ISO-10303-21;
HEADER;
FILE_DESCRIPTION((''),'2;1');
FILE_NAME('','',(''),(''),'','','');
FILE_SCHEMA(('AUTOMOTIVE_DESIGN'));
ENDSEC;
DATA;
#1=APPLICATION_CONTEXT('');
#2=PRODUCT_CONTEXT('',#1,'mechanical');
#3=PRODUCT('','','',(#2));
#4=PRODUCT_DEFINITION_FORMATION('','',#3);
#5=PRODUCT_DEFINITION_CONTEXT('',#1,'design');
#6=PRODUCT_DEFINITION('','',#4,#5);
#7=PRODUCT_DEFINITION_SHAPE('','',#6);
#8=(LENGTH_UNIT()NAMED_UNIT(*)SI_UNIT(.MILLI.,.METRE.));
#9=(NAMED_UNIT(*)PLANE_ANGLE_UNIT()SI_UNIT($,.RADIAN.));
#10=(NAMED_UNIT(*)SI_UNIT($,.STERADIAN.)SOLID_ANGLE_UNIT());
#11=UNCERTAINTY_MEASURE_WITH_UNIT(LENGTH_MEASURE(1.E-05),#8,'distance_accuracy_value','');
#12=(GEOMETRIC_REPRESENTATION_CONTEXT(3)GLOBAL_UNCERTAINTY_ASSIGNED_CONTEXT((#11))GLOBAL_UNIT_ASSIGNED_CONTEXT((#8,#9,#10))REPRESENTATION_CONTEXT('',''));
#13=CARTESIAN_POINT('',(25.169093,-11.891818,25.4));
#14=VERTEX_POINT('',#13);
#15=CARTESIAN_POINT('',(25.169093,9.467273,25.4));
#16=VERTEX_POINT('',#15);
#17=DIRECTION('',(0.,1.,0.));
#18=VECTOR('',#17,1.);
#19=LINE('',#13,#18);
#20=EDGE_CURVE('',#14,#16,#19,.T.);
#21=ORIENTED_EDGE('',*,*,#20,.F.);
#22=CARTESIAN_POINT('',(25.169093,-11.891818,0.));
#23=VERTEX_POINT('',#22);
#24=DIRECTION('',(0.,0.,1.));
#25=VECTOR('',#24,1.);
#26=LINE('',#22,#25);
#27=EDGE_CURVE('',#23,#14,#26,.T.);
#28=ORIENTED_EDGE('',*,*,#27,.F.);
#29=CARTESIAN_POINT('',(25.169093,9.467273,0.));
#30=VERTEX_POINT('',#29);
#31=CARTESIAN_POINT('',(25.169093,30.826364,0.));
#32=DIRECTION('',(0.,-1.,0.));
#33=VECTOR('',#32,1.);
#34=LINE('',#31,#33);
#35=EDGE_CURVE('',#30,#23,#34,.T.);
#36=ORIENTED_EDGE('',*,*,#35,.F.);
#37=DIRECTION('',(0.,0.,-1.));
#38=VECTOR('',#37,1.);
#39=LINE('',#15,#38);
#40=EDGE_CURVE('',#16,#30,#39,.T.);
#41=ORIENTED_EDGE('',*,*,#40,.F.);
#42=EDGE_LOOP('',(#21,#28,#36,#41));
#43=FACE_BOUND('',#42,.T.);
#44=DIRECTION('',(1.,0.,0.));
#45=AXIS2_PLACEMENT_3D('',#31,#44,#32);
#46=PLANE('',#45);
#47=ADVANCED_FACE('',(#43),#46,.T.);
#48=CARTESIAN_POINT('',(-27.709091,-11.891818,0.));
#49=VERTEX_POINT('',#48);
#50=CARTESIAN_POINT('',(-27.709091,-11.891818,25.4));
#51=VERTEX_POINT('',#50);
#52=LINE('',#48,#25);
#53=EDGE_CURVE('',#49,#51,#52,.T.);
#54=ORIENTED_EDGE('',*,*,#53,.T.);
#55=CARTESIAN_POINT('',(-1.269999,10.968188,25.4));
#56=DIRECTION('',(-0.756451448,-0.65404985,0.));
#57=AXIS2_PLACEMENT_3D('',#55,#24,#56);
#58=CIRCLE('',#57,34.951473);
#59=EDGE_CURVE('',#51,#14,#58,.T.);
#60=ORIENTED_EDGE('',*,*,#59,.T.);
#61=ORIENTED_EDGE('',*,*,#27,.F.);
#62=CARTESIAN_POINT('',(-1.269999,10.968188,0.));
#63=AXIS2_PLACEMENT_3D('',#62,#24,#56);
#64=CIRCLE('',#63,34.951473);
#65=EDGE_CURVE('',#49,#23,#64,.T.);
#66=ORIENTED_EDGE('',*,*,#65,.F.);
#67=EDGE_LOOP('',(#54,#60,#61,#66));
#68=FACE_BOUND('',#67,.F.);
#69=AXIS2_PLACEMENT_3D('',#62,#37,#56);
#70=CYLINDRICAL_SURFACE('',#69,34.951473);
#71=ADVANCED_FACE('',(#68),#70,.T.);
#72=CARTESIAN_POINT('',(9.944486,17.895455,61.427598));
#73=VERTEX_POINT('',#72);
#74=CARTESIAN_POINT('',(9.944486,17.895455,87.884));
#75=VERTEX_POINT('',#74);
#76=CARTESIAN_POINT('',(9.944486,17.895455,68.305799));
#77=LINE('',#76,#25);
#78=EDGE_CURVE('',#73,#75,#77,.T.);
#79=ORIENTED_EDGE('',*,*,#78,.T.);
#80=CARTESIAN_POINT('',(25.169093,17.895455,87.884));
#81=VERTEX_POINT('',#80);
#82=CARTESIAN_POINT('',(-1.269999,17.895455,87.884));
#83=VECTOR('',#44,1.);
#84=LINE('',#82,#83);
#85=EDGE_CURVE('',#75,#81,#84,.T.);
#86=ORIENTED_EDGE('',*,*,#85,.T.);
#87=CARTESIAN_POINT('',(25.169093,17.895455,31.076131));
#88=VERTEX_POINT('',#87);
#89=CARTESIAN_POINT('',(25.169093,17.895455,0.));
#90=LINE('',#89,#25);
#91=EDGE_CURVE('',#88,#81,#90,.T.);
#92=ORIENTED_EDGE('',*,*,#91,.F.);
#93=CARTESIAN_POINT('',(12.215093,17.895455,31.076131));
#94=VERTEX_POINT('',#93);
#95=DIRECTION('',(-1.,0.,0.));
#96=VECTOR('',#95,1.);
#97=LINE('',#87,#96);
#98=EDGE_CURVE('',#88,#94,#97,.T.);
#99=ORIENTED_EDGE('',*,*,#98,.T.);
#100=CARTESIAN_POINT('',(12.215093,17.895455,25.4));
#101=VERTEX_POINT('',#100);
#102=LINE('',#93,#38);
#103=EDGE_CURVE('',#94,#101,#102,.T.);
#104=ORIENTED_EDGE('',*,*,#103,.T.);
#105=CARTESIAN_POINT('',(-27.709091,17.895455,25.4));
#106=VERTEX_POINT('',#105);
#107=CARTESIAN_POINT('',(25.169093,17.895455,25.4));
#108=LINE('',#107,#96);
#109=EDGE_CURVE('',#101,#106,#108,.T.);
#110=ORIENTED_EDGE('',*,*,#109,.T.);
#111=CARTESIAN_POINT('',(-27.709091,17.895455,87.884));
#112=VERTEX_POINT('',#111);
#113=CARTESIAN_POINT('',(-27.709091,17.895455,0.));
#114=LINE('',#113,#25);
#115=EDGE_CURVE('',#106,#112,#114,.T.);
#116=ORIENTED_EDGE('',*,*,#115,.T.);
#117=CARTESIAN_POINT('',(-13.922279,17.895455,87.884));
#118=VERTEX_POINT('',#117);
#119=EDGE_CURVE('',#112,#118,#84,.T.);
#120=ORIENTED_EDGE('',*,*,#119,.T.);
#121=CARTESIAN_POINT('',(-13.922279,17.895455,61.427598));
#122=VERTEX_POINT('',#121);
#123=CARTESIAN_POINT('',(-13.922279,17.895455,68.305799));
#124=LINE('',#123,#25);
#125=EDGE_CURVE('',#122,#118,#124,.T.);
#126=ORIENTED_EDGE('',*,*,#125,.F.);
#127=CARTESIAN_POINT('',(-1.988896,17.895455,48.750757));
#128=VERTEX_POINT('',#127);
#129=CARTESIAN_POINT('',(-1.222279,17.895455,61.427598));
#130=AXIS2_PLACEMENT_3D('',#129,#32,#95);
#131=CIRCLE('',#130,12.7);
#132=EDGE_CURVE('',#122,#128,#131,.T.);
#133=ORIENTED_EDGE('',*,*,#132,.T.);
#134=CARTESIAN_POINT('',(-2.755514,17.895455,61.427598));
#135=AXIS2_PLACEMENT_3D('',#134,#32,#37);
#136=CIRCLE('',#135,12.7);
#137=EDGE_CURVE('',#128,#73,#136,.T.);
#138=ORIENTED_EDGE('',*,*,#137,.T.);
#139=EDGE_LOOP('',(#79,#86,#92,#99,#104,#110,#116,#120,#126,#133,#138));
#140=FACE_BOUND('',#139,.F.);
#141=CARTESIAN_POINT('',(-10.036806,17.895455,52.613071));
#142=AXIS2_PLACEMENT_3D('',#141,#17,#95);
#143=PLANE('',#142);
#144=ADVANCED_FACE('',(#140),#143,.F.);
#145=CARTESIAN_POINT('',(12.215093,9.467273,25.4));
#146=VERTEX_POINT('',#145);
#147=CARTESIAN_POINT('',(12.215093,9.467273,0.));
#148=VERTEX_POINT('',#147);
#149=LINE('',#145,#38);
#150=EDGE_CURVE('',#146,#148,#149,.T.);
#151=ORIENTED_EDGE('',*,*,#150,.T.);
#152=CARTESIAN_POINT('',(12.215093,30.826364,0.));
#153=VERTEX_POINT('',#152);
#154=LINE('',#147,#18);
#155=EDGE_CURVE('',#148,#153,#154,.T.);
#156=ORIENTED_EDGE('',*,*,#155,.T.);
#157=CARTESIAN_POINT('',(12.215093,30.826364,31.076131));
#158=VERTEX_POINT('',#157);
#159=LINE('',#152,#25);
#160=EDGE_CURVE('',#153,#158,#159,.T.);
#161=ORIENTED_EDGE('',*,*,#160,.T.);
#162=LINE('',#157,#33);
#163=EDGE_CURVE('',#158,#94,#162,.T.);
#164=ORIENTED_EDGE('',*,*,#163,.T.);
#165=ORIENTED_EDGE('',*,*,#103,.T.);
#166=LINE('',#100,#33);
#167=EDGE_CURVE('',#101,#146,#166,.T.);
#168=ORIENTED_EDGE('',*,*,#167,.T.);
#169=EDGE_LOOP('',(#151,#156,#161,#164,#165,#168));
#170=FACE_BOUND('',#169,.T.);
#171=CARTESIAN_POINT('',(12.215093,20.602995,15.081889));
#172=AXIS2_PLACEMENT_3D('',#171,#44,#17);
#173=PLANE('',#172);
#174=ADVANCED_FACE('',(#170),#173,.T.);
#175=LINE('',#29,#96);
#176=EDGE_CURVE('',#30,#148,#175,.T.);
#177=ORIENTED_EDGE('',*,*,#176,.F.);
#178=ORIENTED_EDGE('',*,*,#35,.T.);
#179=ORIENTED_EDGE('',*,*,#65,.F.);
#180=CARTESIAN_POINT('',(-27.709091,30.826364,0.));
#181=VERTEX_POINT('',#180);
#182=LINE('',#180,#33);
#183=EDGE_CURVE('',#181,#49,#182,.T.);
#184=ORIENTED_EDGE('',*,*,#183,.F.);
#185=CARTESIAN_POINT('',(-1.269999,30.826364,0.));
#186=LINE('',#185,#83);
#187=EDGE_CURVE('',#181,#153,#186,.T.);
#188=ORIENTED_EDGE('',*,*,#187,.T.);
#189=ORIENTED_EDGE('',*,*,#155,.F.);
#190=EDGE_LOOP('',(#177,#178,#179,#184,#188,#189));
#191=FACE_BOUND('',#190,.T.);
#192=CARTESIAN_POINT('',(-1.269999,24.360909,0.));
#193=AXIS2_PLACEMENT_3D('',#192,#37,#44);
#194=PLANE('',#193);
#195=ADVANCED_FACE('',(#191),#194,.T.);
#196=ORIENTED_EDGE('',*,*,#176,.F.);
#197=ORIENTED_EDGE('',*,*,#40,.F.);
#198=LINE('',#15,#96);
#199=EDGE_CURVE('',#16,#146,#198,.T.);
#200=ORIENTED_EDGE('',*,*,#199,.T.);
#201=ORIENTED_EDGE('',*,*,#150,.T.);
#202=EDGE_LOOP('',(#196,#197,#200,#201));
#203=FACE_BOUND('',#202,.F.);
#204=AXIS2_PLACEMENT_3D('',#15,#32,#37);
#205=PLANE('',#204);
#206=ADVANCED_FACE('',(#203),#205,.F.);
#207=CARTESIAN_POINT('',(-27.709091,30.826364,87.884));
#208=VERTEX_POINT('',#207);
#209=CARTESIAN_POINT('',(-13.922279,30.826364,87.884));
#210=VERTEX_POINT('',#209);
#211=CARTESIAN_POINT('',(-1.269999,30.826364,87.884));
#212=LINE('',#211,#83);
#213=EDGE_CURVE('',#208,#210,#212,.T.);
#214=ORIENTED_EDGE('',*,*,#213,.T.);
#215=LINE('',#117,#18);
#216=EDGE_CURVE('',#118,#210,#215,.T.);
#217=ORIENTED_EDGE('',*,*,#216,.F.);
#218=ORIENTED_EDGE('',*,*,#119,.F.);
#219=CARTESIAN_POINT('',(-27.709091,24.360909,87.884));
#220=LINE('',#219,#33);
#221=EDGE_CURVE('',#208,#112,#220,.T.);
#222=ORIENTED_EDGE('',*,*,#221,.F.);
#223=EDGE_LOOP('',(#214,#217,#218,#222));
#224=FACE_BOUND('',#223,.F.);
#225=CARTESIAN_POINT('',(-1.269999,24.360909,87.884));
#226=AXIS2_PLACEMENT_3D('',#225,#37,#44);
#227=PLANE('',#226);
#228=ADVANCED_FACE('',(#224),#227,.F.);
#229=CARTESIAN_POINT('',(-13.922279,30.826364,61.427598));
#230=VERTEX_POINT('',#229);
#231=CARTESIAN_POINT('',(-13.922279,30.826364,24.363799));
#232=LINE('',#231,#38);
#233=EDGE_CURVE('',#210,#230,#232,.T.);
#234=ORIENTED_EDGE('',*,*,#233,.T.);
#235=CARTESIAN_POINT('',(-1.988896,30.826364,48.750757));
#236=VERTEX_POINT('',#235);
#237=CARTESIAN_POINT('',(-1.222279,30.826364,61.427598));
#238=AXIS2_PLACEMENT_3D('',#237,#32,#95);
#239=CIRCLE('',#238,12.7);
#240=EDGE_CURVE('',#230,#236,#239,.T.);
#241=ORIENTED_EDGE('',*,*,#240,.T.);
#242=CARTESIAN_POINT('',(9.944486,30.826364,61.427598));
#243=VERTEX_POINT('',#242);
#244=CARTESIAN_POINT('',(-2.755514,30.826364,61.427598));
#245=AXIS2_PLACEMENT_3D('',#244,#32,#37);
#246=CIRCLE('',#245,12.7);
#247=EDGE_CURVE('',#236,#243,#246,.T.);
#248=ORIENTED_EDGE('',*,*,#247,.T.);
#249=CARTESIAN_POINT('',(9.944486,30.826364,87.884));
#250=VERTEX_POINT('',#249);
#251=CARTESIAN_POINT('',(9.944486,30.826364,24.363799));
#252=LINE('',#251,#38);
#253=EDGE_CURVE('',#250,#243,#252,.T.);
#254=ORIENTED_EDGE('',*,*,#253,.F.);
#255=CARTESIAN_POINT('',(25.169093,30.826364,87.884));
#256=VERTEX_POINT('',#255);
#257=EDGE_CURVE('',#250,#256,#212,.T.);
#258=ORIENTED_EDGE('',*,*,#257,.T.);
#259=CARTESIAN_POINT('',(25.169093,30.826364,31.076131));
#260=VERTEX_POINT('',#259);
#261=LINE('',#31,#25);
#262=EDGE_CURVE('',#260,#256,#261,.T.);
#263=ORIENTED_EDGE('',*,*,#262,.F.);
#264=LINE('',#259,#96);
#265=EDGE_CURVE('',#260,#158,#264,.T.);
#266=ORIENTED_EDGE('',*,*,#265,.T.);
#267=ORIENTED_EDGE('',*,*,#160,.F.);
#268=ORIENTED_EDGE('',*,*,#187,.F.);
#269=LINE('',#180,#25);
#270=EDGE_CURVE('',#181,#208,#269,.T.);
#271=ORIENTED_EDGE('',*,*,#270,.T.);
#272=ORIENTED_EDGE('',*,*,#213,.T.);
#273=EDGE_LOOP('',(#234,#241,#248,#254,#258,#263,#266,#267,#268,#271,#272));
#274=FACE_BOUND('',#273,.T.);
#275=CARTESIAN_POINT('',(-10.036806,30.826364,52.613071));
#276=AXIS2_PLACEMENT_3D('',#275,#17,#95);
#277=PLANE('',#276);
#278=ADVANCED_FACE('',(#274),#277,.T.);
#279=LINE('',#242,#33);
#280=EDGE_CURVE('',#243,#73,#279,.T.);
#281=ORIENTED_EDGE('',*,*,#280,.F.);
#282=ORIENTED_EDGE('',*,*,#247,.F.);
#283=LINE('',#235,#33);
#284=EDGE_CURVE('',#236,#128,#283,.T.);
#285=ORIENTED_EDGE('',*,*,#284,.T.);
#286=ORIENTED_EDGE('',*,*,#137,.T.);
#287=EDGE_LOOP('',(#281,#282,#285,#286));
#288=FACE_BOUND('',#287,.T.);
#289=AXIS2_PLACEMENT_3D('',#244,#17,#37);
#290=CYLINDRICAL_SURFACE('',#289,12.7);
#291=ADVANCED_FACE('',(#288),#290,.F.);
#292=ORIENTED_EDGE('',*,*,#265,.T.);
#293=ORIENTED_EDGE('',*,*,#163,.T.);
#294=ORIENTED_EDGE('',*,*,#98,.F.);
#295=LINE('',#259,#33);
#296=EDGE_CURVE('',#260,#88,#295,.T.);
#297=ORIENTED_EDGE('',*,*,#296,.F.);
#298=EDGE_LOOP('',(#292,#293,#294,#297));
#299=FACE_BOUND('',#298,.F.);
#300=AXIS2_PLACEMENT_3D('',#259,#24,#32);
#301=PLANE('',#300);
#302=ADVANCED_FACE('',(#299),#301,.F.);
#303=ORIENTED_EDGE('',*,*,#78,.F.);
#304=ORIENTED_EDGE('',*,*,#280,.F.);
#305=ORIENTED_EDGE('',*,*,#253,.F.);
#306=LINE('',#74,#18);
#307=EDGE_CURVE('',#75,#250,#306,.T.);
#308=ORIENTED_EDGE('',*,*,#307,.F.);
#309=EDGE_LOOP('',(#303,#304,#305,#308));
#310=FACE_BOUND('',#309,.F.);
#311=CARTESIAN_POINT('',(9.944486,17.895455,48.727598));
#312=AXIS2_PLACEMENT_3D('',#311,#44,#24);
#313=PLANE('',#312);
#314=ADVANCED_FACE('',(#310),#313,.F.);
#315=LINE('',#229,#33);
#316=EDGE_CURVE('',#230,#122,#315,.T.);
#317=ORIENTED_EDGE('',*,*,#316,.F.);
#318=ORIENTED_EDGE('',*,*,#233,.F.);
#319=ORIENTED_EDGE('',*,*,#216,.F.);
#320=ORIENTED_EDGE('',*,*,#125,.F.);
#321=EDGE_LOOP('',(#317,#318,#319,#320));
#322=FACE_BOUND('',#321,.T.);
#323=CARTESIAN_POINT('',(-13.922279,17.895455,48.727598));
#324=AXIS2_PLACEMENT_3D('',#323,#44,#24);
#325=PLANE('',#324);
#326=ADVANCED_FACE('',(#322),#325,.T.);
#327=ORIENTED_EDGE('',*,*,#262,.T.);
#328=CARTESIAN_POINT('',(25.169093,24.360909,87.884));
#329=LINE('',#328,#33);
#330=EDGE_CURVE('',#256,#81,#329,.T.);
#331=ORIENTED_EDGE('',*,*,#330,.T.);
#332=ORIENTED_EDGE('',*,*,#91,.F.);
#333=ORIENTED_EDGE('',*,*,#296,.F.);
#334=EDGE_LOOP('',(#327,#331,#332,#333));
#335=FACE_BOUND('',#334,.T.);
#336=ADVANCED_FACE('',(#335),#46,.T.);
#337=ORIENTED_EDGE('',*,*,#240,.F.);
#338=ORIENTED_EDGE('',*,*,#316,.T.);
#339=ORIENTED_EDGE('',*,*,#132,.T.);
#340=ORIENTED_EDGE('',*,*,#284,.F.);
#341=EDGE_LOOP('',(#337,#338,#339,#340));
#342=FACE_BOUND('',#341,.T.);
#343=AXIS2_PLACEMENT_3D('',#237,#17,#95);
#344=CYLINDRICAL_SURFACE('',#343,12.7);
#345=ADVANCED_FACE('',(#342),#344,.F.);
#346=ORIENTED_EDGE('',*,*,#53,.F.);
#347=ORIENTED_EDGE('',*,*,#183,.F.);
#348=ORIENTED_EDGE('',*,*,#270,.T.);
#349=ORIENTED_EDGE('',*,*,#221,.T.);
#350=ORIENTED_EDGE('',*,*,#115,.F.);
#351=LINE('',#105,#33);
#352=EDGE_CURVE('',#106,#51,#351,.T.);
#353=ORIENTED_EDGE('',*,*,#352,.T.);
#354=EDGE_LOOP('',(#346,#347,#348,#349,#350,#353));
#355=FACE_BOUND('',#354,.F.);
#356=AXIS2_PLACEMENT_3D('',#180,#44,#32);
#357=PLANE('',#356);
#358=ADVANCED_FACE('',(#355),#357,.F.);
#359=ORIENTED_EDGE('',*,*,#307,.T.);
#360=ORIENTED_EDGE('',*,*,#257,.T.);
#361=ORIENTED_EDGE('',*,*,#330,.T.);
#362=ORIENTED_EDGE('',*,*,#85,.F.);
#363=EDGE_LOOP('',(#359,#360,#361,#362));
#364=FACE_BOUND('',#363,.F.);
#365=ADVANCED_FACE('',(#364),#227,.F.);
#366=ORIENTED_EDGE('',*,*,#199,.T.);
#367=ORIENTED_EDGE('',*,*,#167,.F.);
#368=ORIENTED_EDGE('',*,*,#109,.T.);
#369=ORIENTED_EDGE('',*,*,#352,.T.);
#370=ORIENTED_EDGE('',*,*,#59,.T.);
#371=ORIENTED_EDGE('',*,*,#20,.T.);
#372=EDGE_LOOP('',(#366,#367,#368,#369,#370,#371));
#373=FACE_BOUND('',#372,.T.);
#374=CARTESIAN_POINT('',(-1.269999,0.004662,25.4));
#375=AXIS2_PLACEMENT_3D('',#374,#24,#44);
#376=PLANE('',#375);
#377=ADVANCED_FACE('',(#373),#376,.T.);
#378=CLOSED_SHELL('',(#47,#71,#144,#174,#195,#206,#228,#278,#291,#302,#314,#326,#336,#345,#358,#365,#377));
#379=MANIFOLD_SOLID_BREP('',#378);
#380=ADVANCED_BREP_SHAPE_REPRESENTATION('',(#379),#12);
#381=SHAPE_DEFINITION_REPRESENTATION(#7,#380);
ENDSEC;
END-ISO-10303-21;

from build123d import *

# Parameters (mm, degrees)
F1_DEPTH    = 25.4
F2_W        = 52.878184244
F2_H        = 12.9309091717
F3_DEPTH    = 87.884
F4_W        = 23.8667652011
F4_H        = 39.1564019587
F5_DEPTH    = 25.4
F6_T1_DEPTH = 12.9309091717
F8_DEPTH    = 12.954


# Not quite as in the source:
# - a fillet or chamfer that OpenCascade refuses, or shapes differently, is made with other operations: its cross-section is extruded or revolved along the edge and cut away or added


with BuildPart() as f1:
    # F0 (on Top) → F1 (new body)
    with BuildSketch(Plane.XY):
        with BuildLine():
            Line((25.1690931618, 17.8954545408), (-27.7090910822, 17.8954545408))
            Line((-27.7090910822, 17.8954545408), (-27.7090910822, -11.891817674))
            ThreePointArc((-27.7090910822, -11.891817674), (-1.2699989602, -23.9832848769), (25.1690931618, -11.891817674))
            Line((25.1690931618, -11.891817674), (25.1690931618, 17.8954545408))
        make_face()
    extrude(amount=F1_DEPTH)

    # F2 (on face) → F3 (join)
    with BuildSketch(Plane(origin=(0, 0, 0), x_dir=(1, 0, 0), z_dir=(0, 0, -1))):
        with Locations((-1.2699989602, -24.3609091267)):
            Rectangle(F2_W, F2_H)
    extrude(amount=-F3_DEPTH)

    # F4 (on face) → F5 (cut)
    with BuildSketch(Plane.XZ.offset(-17.8954545408)):
        with Locations((-1.9888961688, 68.3057990206)):
            Rectangle(F4_W, F4_H)
    extrude(amount=-F5_DEPTH, mode=Mode.SUBTRACT)

    # F6: fillet of radius 12.7 on 2 edges, made by hand

    # F6_s2 → F6_t1 (join)
    with BuildSketch(Plane.XZ.offset(-30.8263637125)):
        with BuildLine():
            ThreePointArc((-13.9222787693, 61.4275980413), (-10.2025348904, 52.4473419202), (-1.2222787693, 48.7275980413))
            Line((-1.2222787693, 48.7275980413), (-13.9222787693, 48.7275980413))
            Line((-13.9222787693, 48.7275980413), (-13.9222787693, 61.4275980413))
        make_face()
        with BuildLine():
            ThreePointArc((-2.7555135682, 48.7275980413), (6.2247425528, 52.4473419202), (9.9444864318, 61.4275980413))
            Line((9.9444864318, 61.4275980413), (9.9444864318, 48.7275980413))
            Line((9.9444864318, 48.7275980413), (-2.7555135682, 48.7275980413))
        make_face()
    extrude(amount=F6_T1_DEPTH)

    # F7 (on face) → F8 (cut)
    with BuildSketch(Plane.YZ.offset(25.1690931618)):
        Polygon((30.8263637125, 0), (30.8263637125, 31.0761313885), (17.8954545408, 31.0761313885), (17.8954545408, 25.4), (9.4672730193, 25.4), (9.4672730193, 0), align=None)
    extrude(amount=-F8_DEPTH, mode=Mode.SUBTRACT)


solid = f1.part
